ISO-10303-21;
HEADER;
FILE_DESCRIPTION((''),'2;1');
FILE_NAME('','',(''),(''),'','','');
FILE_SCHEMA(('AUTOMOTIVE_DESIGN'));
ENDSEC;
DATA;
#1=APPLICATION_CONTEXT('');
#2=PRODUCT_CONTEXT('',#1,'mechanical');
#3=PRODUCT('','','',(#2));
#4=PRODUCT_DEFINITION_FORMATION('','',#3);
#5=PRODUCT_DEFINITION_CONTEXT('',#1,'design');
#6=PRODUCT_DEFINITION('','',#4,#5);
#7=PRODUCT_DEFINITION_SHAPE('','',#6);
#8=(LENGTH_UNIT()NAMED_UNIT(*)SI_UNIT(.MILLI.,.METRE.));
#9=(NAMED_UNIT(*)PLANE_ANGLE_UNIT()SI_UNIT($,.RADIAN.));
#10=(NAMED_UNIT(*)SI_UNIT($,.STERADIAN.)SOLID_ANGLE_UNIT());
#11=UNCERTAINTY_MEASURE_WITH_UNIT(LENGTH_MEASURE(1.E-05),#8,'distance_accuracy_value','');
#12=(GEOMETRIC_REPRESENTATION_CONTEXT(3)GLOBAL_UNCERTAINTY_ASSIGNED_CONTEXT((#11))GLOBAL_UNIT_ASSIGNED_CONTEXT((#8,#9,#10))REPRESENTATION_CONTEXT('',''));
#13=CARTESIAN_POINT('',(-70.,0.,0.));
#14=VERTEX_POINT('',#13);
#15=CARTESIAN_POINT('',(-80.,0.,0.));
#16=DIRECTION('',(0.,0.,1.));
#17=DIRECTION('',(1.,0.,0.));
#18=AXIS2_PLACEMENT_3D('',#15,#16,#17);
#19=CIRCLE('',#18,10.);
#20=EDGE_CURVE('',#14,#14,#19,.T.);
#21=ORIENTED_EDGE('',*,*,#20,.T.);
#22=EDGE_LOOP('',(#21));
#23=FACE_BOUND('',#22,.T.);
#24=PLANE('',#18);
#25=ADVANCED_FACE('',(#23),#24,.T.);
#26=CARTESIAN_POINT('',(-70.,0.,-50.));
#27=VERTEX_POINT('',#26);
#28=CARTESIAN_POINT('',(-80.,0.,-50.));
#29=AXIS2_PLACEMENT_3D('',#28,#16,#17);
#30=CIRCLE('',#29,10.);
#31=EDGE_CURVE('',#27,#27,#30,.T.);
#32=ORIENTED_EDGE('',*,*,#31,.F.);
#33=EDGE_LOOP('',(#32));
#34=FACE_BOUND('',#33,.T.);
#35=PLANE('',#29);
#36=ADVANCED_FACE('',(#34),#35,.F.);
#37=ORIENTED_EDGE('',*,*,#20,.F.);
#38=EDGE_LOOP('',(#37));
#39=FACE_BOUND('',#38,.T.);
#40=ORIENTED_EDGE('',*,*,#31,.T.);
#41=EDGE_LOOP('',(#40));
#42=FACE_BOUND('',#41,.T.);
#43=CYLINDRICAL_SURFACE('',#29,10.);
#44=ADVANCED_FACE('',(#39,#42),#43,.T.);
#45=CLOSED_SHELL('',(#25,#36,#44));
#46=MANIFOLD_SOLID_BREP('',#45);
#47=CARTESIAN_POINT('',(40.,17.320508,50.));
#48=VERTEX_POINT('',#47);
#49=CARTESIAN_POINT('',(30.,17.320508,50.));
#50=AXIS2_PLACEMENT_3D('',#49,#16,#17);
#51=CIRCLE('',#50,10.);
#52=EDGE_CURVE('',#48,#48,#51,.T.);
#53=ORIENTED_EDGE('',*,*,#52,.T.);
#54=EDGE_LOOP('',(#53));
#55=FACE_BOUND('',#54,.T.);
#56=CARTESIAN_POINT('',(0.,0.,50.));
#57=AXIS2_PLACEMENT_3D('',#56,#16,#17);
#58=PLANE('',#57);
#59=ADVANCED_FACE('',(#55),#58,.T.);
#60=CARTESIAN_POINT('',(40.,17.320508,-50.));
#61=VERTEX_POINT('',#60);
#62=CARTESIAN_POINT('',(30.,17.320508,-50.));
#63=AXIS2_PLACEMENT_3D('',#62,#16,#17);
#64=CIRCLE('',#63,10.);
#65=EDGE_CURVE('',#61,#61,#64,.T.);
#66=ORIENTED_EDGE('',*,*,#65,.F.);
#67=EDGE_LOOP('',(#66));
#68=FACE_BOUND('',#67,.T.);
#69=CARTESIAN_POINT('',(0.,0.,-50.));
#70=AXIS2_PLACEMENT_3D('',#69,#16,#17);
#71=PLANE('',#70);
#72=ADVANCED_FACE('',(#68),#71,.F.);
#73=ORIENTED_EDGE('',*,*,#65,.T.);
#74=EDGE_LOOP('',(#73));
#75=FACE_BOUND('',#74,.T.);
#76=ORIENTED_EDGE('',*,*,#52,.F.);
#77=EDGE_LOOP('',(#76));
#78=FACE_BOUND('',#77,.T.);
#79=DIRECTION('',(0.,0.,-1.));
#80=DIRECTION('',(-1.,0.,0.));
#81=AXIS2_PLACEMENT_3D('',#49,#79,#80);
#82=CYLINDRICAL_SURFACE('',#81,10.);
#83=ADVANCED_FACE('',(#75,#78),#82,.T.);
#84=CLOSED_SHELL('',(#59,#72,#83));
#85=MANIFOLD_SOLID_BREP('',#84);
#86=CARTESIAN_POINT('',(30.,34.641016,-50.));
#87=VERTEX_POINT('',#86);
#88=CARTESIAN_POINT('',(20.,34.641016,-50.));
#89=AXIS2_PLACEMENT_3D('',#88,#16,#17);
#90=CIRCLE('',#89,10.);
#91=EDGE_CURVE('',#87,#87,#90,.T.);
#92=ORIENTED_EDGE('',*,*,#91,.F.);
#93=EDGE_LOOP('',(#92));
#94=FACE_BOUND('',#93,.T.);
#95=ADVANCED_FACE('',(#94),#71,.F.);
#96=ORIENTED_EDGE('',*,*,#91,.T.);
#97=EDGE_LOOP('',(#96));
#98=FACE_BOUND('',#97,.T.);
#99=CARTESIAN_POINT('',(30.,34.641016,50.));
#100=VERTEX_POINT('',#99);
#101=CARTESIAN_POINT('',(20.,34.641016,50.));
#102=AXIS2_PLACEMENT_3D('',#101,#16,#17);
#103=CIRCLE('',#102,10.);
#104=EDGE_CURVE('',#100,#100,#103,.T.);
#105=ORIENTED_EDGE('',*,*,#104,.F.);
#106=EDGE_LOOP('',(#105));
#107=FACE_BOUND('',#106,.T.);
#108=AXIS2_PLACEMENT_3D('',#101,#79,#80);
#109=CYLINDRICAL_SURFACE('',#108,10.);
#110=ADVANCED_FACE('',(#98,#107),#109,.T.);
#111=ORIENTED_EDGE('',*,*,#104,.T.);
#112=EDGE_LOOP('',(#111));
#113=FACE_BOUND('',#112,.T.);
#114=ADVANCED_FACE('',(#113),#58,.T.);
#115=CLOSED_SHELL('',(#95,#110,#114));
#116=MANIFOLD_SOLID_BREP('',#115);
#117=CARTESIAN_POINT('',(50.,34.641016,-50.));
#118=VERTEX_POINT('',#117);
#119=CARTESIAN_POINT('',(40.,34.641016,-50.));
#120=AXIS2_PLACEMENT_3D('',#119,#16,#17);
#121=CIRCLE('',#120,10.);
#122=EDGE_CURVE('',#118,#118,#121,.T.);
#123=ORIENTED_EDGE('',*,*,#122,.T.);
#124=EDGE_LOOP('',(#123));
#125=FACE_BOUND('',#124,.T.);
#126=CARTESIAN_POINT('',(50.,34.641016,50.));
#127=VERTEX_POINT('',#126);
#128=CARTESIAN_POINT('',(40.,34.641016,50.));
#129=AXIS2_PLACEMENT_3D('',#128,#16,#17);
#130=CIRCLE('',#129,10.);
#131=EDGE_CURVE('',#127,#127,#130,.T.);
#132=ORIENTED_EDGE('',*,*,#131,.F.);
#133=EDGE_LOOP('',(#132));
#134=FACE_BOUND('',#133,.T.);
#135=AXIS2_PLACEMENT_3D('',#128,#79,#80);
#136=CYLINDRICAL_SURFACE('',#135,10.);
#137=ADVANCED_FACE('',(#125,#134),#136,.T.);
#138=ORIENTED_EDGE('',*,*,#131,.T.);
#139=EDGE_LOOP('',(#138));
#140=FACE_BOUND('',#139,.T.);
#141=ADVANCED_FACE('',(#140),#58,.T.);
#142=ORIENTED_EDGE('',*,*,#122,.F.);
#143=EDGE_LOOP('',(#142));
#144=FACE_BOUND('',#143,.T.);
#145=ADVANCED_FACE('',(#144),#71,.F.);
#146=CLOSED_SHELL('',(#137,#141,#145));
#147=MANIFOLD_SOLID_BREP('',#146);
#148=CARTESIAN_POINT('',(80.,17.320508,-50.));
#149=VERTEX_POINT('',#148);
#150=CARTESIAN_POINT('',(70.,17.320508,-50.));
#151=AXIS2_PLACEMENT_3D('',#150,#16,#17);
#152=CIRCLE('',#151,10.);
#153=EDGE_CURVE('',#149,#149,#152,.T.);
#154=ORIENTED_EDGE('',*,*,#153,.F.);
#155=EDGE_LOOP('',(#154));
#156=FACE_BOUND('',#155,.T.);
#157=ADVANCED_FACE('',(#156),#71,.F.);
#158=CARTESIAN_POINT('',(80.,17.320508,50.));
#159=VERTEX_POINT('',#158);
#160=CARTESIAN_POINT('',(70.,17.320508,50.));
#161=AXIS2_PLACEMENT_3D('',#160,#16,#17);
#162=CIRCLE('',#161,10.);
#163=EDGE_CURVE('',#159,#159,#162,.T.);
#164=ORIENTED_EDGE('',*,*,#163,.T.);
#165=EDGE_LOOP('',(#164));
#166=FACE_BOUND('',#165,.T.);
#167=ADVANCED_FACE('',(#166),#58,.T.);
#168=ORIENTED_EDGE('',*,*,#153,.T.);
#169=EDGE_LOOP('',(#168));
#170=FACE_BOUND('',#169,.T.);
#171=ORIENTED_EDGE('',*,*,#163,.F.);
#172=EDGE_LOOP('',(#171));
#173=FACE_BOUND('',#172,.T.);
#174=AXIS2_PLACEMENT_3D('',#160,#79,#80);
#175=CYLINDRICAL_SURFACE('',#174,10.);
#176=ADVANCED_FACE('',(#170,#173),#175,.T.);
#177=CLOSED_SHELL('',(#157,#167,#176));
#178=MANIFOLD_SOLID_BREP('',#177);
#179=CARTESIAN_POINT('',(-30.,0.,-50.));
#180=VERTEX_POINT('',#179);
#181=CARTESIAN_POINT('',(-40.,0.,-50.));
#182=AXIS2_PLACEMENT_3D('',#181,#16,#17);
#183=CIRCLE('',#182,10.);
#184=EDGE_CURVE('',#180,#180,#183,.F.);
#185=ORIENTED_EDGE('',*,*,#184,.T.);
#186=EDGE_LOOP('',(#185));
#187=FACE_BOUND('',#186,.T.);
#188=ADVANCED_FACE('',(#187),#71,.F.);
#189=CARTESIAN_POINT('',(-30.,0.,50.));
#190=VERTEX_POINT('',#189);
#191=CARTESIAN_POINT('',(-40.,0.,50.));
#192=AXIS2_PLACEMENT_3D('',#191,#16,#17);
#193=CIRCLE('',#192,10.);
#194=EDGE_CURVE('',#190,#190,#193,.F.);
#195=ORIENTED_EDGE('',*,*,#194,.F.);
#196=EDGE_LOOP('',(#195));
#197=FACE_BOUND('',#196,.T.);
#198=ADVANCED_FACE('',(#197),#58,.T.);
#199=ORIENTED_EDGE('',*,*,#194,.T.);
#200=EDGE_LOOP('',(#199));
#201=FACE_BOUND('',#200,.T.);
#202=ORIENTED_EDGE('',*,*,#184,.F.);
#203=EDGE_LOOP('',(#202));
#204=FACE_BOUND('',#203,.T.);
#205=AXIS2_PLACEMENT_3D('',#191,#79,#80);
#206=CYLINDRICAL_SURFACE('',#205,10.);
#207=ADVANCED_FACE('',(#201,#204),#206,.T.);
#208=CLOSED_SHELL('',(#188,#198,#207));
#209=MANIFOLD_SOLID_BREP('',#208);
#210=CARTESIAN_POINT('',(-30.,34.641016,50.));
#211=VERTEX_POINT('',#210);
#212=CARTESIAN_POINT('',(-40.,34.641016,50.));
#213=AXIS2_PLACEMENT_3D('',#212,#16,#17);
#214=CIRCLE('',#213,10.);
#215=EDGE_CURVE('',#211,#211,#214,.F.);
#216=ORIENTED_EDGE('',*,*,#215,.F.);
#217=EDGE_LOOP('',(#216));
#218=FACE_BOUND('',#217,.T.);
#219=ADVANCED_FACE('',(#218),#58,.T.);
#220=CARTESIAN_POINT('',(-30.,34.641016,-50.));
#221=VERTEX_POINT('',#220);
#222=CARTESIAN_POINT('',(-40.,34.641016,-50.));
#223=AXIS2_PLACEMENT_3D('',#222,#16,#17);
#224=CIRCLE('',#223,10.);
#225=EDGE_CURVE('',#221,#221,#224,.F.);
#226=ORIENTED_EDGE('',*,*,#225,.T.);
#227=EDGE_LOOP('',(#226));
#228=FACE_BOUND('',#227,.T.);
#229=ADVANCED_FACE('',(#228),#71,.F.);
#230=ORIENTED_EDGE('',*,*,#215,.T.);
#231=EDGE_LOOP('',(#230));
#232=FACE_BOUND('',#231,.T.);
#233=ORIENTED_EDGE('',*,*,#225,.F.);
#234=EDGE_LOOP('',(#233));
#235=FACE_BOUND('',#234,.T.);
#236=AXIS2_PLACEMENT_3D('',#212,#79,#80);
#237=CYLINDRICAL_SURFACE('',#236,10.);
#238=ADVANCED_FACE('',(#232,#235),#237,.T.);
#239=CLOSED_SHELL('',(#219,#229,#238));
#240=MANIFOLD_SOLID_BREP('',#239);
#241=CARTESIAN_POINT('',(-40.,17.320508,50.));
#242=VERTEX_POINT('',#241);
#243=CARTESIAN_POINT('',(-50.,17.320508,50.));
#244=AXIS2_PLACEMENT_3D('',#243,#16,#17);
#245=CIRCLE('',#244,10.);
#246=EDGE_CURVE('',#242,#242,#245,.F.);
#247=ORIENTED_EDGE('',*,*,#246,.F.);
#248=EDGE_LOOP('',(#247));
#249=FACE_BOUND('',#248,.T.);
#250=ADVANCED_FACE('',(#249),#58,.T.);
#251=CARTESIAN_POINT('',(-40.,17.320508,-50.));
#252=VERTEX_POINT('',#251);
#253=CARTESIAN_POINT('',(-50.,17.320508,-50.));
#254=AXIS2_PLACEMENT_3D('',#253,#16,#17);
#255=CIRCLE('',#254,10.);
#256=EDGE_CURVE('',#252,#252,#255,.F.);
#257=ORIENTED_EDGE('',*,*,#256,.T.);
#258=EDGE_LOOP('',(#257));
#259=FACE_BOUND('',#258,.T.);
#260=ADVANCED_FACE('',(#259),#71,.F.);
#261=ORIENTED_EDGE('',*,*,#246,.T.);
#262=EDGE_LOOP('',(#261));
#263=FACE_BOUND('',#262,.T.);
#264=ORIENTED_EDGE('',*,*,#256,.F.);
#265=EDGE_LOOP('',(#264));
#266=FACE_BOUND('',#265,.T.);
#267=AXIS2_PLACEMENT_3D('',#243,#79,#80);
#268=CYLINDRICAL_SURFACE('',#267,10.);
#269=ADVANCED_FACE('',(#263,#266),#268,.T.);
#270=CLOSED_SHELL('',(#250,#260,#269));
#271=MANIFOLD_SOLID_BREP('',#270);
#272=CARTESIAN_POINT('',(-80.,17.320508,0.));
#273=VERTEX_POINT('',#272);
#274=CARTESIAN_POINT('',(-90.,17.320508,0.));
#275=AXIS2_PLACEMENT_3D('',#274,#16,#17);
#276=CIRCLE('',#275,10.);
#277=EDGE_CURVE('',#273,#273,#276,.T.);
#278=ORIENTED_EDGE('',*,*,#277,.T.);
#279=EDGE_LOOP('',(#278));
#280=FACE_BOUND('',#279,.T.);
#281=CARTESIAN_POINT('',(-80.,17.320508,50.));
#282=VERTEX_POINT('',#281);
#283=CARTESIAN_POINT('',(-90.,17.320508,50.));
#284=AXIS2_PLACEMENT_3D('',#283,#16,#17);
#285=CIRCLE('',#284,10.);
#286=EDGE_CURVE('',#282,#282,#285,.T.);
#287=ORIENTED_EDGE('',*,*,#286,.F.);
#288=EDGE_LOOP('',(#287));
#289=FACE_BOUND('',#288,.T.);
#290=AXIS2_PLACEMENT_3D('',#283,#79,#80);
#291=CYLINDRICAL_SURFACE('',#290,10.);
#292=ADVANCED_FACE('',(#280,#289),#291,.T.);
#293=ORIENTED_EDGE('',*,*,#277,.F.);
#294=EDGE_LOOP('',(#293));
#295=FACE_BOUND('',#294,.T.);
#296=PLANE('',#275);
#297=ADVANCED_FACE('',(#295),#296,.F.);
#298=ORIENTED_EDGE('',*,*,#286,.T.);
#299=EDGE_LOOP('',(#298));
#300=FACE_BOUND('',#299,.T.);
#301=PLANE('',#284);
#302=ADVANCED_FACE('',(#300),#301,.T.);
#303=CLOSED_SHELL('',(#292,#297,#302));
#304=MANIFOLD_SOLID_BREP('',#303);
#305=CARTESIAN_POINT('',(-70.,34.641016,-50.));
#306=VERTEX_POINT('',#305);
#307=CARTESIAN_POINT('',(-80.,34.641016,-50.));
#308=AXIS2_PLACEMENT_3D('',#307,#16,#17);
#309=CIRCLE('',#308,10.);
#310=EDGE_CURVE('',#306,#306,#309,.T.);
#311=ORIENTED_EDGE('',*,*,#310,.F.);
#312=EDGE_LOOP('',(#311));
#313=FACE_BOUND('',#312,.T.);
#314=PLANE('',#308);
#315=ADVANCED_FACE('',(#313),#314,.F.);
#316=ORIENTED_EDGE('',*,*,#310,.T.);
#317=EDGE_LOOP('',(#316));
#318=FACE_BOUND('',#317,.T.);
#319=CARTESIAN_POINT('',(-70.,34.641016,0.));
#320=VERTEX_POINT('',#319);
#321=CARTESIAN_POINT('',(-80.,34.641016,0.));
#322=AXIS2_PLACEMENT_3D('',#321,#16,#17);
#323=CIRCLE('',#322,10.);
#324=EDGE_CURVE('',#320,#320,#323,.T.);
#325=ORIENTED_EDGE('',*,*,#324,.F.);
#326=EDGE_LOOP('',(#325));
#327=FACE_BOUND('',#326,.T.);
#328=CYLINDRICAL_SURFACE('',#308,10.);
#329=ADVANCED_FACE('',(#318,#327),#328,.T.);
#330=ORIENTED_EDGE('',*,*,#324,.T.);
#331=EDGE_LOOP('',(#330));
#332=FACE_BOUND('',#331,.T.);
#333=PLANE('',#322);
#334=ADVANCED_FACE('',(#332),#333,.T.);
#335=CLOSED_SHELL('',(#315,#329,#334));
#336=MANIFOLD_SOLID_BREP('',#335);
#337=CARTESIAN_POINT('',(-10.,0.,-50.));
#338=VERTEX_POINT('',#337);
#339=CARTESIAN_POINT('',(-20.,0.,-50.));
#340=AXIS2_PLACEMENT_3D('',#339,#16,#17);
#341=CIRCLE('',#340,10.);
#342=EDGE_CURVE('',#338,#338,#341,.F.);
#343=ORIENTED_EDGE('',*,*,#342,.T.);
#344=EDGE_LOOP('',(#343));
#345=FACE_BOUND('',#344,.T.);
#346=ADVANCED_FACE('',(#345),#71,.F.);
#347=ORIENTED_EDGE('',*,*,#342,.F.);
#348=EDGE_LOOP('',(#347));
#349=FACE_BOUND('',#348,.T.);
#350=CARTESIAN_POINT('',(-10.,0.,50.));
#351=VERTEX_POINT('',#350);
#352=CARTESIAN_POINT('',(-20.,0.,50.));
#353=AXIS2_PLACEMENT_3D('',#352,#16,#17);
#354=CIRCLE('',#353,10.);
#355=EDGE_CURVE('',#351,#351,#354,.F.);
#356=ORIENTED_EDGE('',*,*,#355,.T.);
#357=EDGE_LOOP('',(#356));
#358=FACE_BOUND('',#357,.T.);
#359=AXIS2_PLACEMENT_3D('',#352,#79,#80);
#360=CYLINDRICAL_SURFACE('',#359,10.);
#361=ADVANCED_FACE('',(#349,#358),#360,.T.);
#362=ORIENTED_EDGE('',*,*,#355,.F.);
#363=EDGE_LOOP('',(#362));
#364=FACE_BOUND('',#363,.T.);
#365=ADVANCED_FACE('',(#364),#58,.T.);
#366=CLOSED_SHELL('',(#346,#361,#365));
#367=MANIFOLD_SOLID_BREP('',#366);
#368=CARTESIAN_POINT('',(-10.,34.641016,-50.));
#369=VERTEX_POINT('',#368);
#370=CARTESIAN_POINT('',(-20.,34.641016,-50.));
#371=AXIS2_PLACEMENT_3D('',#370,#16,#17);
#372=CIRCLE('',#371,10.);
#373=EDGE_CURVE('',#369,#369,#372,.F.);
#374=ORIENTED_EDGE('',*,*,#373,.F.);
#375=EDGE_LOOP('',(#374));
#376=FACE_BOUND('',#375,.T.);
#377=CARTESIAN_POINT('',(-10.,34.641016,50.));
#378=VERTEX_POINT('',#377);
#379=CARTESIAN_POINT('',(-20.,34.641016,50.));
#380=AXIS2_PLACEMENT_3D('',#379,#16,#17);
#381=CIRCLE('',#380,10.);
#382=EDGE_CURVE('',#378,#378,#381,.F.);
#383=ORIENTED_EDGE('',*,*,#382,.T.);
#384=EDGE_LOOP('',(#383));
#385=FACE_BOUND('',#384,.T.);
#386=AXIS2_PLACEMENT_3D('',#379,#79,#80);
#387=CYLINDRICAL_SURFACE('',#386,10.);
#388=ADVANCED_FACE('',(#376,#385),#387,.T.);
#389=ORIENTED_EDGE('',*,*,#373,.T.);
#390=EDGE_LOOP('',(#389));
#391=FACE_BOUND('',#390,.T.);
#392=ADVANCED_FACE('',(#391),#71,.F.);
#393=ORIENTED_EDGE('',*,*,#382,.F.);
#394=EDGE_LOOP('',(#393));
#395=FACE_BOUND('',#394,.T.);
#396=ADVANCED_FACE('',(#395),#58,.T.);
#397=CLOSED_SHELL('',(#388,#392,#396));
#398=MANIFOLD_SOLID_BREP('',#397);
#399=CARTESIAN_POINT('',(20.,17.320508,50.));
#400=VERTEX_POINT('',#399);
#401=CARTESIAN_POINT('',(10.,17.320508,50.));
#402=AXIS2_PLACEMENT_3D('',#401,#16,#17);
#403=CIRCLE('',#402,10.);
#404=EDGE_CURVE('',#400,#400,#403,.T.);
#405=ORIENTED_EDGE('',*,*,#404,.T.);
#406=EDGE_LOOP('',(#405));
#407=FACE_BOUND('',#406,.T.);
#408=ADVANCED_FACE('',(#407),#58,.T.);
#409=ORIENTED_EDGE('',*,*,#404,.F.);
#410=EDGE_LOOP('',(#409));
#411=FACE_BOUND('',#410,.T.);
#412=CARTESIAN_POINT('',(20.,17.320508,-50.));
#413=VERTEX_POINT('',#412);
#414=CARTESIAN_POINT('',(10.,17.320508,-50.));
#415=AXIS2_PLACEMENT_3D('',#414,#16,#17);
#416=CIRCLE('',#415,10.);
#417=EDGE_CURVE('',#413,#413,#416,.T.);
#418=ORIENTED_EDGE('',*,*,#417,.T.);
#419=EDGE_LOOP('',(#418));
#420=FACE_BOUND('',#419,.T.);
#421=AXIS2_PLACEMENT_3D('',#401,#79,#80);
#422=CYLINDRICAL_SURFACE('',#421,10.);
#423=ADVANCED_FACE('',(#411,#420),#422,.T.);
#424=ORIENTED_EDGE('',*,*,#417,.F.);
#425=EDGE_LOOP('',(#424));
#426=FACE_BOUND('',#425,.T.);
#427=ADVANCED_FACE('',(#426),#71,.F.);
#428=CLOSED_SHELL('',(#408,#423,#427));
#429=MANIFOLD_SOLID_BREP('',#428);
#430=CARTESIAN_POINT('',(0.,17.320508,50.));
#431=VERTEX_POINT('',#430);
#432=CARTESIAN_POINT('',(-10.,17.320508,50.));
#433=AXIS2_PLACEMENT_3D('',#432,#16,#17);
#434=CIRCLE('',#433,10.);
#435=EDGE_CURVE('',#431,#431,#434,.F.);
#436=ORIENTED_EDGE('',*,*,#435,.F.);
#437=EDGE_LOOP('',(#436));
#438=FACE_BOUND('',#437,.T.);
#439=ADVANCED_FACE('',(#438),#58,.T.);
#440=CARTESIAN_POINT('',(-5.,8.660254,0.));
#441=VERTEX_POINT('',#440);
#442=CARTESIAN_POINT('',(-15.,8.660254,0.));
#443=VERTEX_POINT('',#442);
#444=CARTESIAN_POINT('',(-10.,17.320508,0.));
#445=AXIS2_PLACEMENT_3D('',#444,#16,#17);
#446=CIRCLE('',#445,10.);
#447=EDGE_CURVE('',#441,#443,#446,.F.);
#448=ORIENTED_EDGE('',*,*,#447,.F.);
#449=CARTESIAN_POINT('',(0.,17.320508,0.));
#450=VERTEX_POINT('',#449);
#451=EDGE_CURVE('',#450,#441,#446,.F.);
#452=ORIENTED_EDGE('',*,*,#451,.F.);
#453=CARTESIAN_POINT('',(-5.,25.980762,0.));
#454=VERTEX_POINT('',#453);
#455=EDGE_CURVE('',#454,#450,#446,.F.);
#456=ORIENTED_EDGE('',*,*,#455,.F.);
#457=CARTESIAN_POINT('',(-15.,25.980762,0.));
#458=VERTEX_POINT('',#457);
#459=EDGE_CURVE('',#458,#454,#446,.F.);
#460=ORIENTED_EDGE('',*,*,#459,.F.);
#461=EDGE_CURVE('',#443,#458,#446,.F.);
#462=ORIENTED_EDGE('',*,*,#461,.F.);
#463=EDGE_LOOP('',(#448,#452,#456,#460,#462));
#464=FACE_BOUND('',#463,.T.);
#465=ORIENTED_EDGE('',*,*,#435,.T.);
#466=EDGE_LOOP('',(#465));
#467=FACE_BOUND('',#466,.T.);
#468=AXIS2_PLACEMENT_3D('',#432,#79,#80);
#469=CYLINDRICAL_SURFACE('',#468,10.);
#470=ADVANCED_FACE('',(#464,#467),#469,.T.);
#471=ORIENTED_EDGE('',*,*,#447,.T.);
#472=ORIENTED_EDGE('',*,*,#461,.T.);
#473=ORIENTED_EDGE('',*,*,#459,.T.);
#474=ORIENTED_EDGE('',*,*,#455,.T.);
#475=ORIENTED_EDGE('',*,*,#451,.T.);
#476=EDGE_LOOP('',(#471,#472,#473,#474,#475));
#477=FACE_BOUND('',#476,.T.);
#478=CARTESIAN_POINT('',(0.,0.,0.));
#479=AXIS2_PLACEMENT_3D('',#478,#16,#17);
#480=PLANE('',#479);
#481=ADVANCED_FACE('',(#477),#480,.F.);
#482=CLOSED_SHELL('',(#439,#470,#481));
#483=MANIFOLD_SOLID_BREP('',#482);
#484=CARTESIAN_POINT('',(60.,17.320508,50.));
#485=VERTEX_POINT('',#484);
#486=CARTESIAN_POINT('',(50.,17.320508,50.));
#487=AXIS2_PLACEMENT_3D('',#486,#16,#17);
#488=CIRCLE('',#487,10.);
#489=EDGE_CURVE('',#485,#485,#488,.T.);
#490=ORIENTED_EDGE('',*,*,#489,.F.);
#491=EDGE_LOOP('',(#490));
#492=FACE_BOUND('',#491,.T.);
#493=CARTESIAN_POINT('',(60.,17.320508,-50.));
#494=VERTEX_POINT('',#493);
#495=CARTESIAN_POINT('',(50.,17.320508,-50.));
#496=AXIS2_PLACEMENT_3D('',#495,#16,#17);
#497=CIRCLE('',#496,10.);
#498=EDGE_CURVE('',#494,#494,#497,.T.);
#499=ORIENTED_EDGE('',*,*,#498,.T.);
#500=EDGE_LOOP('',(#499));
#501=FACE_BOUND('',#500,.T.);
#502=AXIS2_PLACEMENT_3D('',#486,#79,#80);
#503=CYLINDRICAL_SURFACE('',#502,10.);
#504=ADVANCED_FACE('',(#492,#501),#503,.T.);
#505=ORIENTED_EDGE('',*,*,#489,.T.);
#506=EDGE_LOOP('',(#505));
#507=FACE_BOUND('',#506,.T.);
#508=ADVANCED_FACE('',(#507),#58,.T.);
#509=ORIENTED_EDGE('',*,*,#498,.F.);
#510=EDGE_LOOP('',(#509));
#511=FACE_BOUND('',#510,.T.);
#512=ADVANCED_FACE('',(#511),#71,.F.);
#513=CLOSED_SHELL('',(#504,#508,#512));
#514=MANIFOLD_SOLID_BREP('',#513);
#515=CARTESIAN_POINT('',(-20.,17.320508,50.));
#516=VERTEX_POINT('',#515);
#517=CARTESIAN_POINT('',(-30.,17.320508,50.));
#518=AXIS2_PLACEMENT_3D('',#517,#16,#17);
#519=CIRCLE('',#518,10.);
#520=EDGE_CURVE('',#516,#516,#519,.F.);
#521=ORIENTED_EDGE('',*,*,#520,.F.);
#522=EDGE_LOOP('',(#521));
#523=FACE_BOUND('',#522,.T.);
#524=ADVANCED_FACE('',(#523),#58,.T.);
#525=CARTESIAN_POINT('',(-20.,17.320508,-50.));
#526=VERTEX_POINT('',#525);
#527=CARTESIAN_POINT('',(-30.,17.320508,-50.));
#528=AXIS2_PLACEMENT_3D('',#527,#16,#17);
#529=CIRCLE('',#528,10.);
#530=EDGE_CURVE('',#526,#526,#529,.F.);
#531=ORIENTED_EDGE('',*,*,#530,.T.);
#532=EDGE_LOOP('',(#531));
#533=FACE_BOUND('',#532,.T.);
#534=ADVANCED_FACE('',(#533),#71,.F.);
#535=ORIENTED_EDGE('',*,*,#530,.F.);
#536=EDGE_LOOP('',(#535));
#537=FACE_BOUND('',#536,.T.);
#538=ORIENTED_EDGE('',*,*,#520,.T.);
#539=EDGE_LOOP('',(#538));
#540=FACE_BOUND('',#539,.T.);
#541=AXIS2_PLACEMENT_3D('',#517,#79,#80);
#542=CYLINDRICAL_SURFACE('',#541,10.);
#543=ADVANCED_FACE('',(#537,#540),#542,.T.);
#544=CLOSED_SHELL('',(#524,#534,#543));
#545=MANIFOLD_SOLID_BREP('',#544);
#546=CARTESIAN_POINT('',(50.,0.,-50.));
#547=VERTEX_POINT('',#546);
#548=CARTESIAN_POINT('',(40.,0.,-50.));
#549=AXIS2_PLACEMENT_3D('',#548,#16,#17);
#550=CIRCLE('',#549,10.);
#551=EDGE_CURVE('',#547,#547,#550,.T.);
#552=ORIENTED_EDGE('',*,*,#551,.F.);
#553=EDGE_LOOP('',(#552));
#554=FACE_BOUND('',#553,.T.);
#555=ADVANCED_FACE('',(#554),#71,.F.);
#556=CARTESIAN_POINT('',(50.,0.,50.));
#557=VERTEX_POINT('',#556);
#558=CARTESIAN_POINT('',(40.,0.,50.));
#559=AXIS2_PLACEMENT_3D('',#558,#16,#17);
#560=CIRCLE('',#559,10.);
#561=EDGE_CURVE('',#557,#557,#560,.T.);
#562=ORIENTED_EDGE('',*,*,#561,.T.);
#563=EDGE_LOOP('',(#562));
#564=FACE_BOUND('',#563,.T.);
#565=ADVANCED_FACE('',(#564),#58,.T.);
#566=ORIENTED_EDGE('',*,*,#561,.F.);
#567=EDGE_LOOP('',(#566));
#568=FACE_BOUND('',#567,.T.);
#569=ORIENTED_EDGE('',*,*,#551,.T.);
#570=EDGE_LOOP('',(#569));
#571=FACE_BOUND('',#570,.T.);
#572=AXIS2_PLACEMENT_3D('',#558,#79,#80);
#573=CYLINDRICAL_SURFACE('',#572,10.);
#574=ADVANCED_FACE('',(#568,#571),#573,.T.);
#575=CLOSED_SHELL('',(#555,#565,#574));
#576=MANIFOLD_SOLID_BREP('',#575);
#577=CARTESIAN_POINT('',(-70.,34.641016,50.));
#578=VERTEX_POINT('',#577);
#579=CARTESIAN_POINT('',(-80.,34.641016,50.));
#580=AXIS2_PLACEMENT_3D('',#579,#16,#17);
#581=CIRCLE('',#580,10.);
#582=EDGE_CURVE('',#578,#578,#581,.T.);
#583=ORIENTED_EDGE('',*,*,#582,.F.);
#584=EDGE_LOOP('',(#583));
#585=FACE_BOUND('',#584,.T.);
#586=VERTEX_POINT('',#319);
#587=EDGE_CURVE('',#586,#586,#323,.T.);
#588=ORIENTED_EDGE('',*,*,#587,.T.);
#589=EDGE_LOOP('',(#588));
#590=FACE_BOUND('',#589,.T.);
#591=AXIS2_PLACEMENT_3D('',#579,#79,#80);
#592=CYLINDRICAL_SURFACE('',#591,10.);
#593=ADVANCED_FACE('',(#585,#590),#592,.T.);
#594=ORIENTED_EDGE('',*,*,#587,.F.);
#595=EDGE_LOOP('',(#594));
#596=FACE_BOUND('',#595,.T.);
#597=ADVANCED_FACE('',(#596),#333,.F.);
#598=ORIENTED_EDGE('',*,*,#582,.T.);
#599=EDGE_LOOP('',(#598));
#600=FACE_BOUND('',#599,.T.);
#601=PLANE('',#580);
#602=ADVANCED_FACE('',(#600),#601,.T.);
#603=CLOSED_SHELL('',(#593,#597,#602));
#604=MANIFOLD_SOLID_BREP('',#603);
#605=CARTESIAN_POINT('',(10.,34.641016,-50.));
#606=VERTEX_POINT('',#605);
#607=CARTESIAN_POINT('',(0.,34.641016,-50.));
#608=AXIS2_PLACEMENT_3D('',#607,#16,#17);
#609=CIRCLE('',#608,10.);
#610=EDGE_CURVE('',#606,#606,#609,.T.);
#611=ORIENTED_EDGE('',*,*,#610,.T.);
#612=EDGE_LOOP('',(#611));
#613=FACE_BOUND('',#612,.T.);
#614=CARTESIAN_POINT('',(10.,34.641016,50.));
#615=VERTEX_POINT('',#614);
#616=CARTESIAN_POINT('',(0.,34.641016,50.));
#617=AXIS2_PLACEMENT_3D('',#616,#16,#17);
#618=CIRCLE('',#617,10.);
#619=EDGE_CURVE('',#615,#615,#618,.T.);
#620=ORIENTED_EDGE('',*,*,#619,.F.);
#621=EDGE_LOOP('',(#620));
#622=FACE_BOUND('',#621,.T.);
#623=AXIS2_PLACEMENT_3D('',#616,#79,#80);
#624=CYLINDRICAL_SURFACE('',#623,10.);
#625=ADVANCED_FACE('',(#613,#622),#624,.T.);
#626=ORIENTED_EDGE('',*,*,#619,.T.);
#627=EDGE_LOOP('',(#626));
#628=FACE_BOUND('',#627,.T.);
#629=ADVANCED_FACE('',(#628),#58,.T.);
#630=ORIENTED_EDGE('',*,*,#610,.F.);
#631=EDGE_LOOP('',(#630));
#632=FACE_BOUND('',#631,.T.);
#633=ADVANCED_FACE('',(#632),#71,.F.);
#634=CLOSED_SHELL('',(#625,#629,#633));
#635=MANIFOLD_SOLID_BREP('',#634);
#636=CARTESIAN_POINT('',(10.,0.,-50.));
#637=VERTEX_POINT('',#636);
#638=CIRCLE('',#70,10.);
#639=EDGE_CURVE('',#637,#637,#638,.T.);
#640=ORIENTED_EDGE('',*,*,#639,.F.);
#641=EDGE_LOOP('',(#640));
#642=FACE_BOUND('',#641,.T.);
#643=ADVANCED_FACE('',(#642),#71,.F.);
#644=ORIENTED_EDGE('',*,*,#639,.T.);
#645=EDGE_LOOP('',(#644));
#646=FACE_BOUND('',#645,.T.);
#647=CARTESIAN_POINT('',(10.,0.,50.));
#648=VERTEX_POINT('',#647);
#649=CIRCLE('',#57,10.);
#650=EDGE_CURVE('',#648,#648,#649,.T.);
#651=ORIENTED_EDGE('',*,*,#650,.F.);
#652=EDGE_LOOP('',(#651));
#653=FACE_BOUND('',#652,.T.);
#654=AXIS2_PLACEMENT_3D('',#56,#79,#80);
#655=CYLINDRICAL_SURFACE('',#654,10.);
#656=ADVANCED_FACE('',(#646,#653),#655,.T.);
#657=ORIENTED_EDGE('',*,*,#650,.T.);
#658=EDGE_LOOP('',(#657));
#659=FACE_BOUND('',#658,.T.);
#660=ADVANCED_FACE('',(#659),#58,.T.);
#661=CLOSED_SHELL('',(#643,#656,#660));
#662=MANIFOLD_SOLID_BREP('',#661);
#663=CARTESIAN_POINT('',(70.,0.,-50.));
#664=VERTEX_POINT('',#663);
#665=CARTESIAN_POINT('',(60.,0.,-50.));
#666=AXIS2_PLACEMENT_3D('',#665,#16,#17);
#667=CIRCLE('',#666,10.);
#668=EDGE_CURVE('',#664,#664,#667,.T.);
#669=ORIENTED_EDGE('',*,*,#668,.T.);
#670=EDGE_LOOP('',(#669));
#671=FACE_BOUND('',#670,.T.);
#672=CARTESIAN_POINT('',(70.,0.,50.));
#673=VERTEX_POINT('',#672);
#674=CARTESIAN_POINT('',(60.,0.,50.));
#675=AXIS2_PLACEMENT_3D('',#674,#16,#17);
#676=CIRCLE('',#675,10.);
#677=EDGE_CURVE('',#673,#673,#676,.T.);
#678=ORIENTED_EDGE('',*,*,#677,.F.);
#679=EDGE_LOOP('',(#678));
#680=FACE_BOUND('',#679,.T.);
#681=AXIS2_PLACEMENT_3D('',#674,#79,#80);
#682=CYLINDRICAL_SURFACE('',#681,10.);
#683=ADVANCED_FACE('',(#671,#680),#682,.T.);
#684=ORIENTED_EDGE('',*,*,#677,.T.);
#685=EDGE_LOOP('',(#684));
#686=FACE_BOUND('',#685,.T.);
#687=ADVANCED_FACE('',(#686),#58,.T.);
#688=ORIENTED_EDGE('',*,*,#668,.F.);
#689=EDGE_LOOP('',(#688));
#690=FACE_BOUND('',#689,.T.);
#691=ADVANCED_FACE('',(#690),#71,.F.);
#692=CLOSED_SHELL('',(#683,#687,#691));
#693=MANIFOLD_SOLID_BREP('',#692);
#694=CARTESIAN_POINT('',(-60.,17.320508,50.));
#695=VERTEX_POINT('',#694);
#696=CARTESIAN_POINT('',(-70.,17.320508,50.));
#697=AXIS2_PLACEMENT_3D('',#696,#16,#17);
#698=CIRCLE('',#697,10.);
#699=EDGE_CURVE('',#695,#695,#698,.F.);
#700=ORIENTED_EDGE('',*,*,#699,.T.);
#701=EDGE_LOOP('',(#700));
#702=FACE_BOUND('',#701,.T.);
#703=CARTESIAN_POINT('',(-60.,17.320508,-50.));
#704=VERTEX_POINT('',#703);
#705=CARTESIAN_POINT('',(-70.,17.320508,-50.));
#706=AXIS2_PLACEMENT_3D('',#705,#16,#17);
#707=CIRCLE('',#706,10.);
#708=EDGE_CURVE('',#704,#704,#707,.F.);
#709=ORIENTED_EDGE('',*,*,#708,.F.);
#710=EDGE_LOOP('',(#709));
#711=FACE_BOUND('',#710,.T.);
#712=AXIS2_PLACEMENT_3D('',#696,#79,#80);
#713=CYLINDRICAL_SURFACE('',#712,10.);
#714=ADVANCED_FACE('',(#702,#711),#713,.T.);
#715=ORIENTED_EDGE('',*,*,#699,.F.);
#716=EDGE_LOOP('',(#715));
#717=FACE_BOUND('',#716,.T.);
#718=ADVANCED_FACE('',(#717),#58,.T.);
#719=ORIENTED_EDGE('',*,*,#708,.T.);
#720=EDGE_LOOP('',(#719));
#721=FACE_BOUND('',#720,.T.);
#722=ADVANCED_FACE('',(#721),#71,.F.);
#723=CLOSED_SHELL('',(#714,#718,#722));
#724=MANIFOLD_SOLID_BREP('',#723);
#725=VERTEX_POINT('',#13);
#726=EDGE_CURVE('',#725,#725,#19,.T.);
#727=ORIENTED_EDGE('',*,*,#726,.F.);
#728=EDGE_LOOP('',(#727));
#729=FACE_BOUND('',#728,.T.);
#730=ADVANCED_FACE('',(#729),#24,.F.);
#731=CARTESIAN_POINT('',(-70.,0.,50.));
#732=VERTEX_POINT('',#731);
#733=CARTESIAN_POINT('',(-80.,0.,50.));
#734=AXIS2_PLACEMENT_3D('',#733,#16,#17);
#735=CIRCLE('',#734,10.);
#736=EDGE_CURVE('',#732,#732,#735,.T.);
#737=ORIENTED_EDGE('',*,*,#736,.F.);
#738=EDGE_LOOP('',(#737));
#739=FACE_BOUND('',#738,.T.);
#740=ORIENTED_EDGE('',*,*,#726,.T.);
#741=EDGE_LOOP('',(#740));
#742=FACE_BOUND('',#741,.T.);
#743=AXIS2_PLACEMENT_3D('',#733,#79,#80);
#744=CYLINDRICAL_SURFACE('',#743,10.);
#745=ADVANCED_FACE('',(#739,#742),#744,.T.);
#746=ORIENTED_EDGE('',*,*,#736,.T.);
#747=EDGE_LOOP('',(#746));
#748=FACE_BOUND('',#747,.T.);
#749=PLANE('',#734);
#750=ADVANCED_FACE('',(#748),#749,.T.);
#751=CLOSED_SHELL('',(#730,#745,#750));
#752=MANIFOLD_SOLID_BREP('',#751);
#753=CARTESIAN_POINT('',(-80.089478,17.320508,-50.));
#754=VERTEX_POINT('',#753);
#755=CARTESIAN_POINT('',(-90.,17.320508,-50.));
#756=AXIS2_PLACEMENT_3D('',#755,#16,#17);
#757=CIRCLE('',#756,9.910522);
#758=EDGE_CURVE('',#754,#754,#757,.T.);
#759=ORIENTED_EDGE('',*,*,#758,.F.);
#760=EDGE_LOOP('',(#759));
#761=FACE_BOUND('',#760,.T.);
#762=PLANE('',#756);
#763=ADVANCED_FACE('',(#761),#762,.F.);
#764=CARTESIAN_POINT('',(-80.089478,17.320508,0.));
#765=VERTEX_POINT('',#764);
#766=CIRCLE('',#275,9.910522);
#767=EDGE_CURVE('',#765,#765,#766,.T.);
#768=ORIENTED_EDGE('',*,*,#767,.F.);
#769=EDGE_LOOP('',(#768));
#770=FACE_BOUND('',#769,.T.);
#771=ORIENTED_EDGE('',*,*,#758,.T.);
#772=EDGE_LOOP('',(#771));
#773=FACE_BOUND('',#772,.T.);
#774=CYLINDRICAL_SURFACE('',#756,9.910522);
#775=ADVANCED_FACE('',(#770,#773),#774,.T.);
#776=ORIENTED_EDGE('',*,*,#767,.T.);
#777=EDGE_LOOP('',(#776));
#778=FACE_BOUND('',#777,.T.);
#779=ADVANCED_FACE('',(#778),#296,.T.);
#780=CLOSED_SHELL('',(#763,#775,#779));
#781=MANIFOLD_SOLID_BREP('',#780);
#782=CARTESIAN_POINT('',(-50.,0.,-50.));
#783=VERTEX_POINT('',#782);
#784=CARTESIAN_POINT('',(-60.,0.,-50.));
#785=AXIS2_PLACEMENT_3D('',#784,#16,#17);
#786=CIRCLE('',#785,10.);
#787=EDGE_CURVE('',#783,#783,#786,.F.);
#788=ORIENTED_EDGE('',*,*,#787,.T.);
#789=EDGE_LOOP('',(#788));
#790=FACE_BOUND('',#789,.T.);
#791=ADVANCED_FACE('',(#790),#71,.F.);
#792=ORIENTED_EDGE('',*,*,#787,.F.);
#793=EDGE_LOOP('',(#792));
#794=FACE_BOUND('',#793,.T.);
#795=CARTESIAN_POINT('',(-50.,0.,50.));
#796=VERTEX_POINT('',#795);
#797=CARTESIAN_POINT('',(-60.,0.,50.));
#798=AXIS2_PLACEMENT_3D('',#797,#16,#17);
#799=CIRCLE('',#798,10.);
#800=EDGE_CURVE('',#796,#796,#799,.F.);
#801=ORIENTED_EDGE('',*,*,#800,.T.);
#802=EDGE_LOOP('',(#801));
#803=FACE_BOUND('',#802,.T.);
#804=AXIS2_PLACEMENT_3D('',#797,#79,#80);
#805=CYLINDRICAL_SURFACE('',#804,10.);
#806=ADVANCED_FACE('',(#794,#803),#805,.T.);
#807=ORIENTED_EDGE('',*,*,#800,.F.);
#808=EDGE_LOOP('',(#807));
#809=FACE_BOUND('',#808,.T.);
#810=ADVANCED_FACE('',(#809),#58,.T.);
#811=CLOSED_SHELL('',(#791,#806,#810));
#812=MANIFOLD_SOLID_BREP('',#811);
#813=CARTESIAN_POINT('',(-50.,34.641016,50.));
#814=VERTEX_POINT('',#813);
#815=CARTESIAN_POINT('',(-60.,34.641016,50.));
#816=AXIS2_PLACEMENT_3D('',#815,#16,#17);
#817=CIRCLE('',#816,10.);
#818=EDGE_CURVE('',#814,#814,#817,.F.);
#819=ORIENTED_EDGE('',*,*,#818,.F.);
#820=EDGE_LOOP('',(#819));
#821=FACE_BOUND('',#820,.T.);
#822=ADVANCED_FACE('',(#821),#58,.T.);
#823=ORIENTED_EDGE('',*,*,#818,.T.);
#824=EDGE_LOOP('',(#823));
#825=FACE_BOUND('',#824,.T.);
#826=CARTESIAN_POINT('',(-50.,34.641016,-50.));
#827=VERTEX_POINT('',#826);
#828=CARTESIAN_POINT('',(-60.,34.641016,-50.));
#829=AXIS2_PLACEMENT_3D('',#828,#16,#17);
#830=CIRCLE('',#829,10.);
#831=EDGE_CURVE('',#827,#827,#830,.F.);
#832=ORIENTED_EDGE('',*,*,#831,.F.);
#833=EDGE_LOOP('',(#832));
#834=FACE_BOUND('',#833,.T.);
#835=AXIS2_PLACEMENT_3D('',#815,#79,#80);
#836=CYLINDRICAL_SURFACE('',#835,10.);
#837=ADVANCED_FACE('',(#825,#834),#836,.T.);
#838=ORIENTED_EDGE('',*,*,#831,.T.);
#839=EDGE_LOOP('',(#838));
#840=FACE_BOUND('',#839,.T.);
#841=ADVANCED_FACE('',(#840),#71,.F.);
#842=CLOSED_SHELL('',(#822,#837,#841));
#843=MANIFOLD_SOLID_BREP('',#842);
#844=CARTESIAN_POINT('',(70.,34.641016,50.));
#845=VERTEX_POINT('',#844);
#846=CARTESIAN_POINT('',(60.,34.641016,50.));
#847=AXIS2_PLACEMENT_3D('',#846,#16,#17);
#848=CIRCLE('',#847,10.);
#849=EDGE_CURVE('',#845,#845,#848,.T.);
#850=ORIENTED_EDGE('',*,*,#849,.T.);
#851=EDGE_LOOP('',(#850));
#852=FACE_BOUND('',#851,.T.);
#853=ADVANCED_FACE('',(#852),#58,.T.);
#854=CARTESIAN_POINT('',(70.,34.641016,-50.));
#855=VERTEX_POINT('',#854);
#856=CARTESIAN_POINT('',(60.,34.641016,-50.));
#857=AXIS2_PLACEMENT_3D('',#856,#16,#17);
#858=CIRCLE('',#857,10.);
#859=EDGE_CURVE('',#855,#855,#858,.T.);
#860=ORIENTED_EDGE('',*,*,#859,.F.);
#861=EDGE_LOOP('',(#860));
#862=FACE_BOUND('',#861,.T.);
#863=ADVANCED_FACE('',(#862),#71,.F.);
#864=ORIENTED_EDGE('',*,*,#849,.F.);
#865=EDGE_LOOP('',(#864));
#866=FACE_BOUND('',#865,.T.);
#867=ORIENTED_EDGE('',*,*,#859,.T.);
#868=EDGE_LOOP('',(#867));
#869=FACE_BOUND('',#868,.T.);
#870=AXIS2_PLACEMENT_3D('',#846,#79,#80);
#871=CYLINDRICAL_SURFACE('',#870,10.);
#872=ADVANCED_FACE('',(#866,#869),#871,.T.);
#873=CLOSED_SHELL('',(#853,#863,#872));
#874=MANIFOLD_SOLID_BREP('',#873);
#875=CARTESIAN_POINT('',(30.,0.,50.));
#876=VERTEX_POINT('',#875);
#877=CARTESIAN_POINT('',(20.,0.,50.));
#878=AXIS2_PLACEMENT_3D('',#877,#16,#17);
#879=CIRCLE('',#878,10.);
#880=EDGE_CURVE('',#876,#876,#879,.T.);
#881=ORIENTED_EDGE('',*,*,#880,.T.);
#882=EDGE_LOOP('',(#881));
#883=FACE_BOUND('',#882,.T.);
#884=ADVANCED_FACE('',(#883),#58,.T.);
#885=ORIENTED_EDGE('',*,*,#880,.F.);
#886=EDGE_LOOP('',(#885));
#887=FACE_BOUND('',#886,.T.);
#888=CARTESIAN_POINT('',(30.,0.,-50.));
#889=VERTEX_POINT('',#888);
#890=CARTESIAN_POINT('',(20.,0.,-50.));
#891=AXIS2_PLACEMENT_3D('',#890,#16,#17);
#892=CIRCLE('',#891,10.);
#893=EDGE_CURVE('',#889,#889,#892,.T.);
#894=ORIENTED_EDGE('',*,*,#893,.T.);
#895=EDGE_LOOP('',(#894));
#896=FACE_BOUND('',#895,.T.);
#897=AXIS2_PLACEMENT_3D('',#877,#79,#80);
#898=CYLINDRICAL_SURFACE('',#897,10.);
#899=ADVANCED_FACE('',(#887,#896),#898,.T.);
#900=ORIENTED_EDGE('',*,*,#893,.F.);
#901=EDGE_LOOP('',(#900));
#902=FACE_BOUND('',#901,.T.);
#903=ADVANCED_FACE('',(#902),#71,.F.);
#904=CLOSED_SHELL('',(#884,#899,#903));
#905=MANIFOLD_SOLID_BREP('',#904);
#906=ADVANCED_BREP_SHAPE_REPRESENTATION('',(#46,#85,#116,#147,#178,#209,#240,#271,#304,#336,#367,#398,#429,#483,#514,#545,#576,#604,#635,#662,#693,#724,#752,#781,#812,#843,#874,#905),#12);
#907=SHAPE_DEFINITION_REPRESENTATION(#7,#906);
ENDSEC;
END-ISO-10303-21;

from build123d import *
from build123d.topology import SkipClean

# Parameters (mm, degrees)
SKETCH_1_R         = 10
EXTRUDE_1_DEPTH    = 50
EXTRUDE_1_2_DEPTH  = 50
EXTRUDE_1_3_DEPTH  = 50
EXTRUDE_1_4_DEPTH  = 50
EXTRUDE_1_5_DEPTH  = 50
EXTRUDE_1_6_DEPTH  = 50
EXTRUDE_1_7_DEPTH  = 50
EXTRUDE_1_8_DEPTH  = 50
EXTRUDE_1_9_DEPTH  = 50
EXTRUDE_1_10_DEPTH = 50
EXTRUDE_1_11_DEPTH = 50
EXTRUDE_1_12_DEPTH = 50
EXTRUDE_1_13_DEPTH = 50
EXTRUDE_1_14_DEPTH = 50
EXTRUDE_1_15_DEPTH = 50
EXTRUDE_1_16_DEPTH = 50
EXTRUDE_1_17_DEPTH = 50
EXTRUDE_1_18_DEPTH = 50
EXTRUDE_1_19_DEPTH = 50
EXTRUDE_1_20_DEPTH = 50
EXTRUDE_1_21_DEPTH = 50
EXTRUDE_1_22_DEPTH = 50
EXTRUDE_1_23_DEPTH = 50
EXTRUDE_1_24_DEPTH = 50
EXTRUDE_1_25_DEPTH = 50
EXTRUDE_START      = -50
SKETCH_2_R         = 9.910522244
EXTRUDE_2_DEPTH    = 50


with BuildPart() as part:
    # 草图1 → 凸台-拉伸1 (new body)
    with BuildSketch(Plane.XY):
        with Locations((-60, 34.641016151)):
            Circle(SKETCH_1_R)
    extrude(amount=EXTRUDE_1_DEPTH)



with BuildPart() as body_2:
    # 草图1 → Extrude 1 2 (new body)
    with BuildSketch(Plane.XY):
        with Locations((-70, 17.320508076)):
            Circle(SKETCH_1_R)
    extrude(amount=EXTRUDE_1_2_DEPTH)


with BuildPart() as body_3:
    # 草图1 → Extrude 1 3 (new body)
    with BuildSketch(Plane.XY):
        with Locations((-60, 0)):
            Circle(SKETCH_1_R)
    extrude(amount=EXTRUDE_1_3_DEPTH)


with BuildPart() as body_4:
    # 草图1 → Extrude 1 4 (new body)
    with BuildSketch(Plane.XY):
        with Locations((-50, 17.320508076)):
            Circle(SKETCH_1_R)
    extrude(amount=EXTRUDE_1_4_DEPTH)


with BuildPart() as body_5:
    # 草图1 → Extrude 1 5 (new body)
    with BuildSketch(Plane.XY):
        with Locations((-30, 17.320508076)):
            Circle(SKETCH_1_R)
    extrude(amount=EXTRUDE_1_5_DEPTH)


with BuildPart() as body_6:
    # 草图1 → Extrude 1 6 (new body)
    with BuildSketch(Plane.XY):
        with Locations((-40, 0)):
            Circle(SKETCH_1_R)
    extrude(amount=EXTRUDE_1_6_DEPTH)


with BuildPart() as body_7:
    # 草图1 → Extrude 1 7 (new body)
    with BuildSketch(Plane.XY):
        with Locations((-10, 17.320508076)):
            Circle(SKETCH_1_R)
    extrude(amount=EXTRUDE_1_7_DEPTH)


with BuildPart() as body_8:
    # 草图1 → Extrude 1 8 (new body)
    with BuildSketch(Plane.XY):
        with Locations((-20, 0)):
            Circle(SKETCH_1_R)
    extrude(amount=EXTRUDE_1_8_DEPTH)


with BuildPart() as body_9:
    # 草图1 → Extrude 1 9 (new body)
    with BuildSketch(Plane.XY):
        with Locations((10, 17.320508076)):
            Circle(SKETCH_1_R)
    extrude(amount=EXTRUDE_1_9_DEPTH)


with BuildPart() as body_10:
    # 草图1 → Extrude 1 10 (new body)
    with BuildSketch(Plane.XY):
        with Locations((30, 17.320508076)):
            Circle(SKETCH_1_R)
    extrude(amount=EXTRUDE_1_10_DEPTH)


with BuildPart() as body_11:
    # 草图1 → Extrude 1 11 (new body)
    with BuildSketch(Plane.XY):
        Circle(SKETCH_1_R)
    extrude(amount=EXTRUDE_1_11_DEPTH)


with BuildPart() as body_12:
    # 草图1 → Extrude 1 12 (new body)
    with BuildSketch(Plane.XY):
        with Locations((20, 0)):
            Circle(SKETCH_1_R)
    extrude(amount=EXTRUDE_1_12_DEPTH)


with BuildPart() as body_13:
    # 草图1 → Extrude 1 13 (new body)
    with BuildSketch(Plane.XY):
        with Locations((40, 0)):
            Circle(SKETCH_1_R)
    extrude(amount=EXTRUDE_1_13_DEPTH)


with BuildPart() as body_14:
    # 草图1 → Extrude 1 14 (new body)
    with BuildSketch(Plane.XY):
        with Locations((50, 17.320508076)):
            Circle(SKETCH_1_R)
    extrude(amount=EXTRUDE_1_14_DEPTH)


with BuildPart() as body_15:
    # 草图1 → Extrude 1 15 (new body)
    with BuildSketch(Plane.XY):
        with Locations((40, 34.641016151)):
            Circle(SKETCH_1_R)
    extrude(amount=EXTRUDE_1_15_DEPTH)


with BuildPart() as body_16:
    # 草图1 → Extrude 1 16 (new body)
    with BuildSketch(Plane.XY):
        with Locations((0, 34.641016151)):
            Circle(SKETCH_1_R)
    extrude(amount=EXTRUDE_1_16_DEPTH)


with BuildPart() as body_17:
    # 草图1 → Extrude 1 17 (new body)
    with BuildSketch(Plane.XY):
        with Locations((20, 34.641016151)):
            Circle(SKETCH_1_R)
    extrude(amount=EXTRUDE_1_17_DEPTH)


with BuildPart() as body_18:
    # 草图1 → Extrude 1 18 (new body)
    with BuildSketch(Plane.XY):
        with Locations((-20, 34.641016151)):
            Circle(SKETCH_1_R)
    extrude(amount=EXTRUDE_1_18_DEPTH)


with BuildPart() as body_19:
    # 草图1 → Extrude 1 19 (new body)
    with BuildSketch(Plane.XY):
        with Locations((-40, 34.641016151)):
            Circle(SKETCH_1_R)
    extrude(amount=EXTRUDE_1_19_DEPTH)


with BuildPart() as body_20:
    # 草图1 → Extrude 1 20 (new body)
    with BuildSketch(Plane.XY):
        with Locations((60, 34.641016151)):
            Circle(SKETCH_1_R)
    extrude(amount=EXTRUDE_1_20_DEPTH)


with BuildPart() as body_21:
    # 草图1 → Extrude 1 21 (new body)
    with BuildSketch(Plane.XY):
        with Locations((70, 17.320508076)):
            Circle(SKETCH_1_R)
    extrude(amount=EXTRUDE_1_21_DEPTH)


with BuildPart() as body_22:
    # 草图1 → Extrude 1 22 (new body)
    with BuildSketch(Plane.XY):
        with Locations((60, 0)):
            Circle(SKETCH_1_R)
    extrude(amount=EXTRUDE_1_22_DEPTH)


with BuildPart() as body_23:
    # 草图1 → Extrude 1 23 (new body)
    with BuildSketch(Plane.XY):
        with Locations((-90, 17.320508076)):
            Circle(SKETCH_1_R)
    extrude(amount=EXTRUDE_1_23_DEPTH)


with BuildPart() as body_24:
    # 草图1 → Extrude 1 24 (new body)
    with BuildSketch(Plane.XY):
        with Locations((-80, 0)):
            Circle(SKETCH_1_R)
    extrude(amount=EXTRUDE_1_24_DEPTH)


with BuildPart() as body_25:
    # 草图1 → Extrude 1 25 (new body)
    with BuildSketch(Plane.XY):
        with Locations((-80, 34.641016151)):
            Circle(SKETCH_1_R)
    extrude(amount=EXTRUDE_1_25_DEPTH)


with BuildPart() as part_1:
    with SkipClean():  # the faces are left unmerged after this step: merging them gives an invalid solid
        add(part.part)

        add(body_2.part)  # 凸台-拉伸2 merges body 2

        add(body_3.part)  # 凸台-拉伸2 merges body 3

        add(body_4.part)  # 凸台-拉伸2 merges body 4

        add(body_5.part)  # 凸台-拉伸2 merges body 5

        add(body_6.part)  # 凸台-拉伸2 merges body 6

        add(body_8.part)  # 凸台-拉伸2 merges body 8

        add(body_9.part)  # 凸台-拉伸2 merges body 9

        add(body_10.part)  # 凸台-拉伸2 merges body 10

        add(body_11.part)  # 凸台-拉伸2 merges body 11

        add(body_12.part)  # 凸台-拉伸2 merges body 12

        add(body_13.part)  # 凸台-拉伸2 merges body 13

        add(body_14.part)  # 凸台-拉伸2 merges body 14

        add(body_15.part)  # 凸台-拉伸2 merges body 15

        add(body_16.part)  # 凸台-拉伸2 merges body 16

        add(body_17.part)  # 凸台-拉伸2 merges body 17

        add(body_18.part)  # 凸台-拉伸2 merges body 18

        add(body_19.part)  # 凸台-拉伸2 merges body 19

        add(body_20.part)  # 凸台-拉伸2 merges body 20

        add(body_21.part)  # 凸台-拉伸2 merges body 21

        add(body_22.part)  # 凸台-拉伸2 merges body 22
        # 草图2 → 凸台-拉伸2 (add)
        with BuildSketch(Plane.XY.offset(EXTRUDE_START)):
            with BuildLine():
                ThreePointArc((-10, 0), (0, -10), (10, 0))
                ThreePointArc((10, 0), (8.660254084, 4.99999992), (5.000000161, 8.660253945))
                ThreePointArc((5.000000161, 8.660253945), (-4.99999992, 8.660254084), (-10, 0))
            make_face()
            with BuildLine():
                ThreePointArc((-10, 0), (-14.999999925, 8.660253995), (-24.99999985, 8.660254124))
                ThreePointArc((-24.99999985, 8.660254124), (-28.660253995, 5.000000075), (-30, 0))
                ThreePointArc((-30, 0), (-20, -10), (-10, 0))
            make_face()
            with BuildLine():
                ThreePointArc((10, 0), (20, -10), (30, 0))
                ThreePointArc((30, 0), (28.660254042, 4.999999993), (25.000000014, 8.66025403))
                ThreePointArc((25.000000014, 8.66025403), (20.000000064, 10), (15.000000097, 8.660254094))
                ThreePointArc((15.000000097, 8.660254094), (11.33974599, 5.000000048), (10, 0))
            make_face()
            with BuildLine():
                ThreePointArc((15.000000097, 8.660254094), (18.660254066, 12.320508124), (20, 17.320508076))
                ThreePointArc((20, 17.320508076), (18.660253991, 22.320508156), (14.999999839, 25.980762206))
                ThreePointArc((14.999999839, 25.980762206), (9.99999992, 27.320508076), (5.000000022, 25.980762126))
                ThreePointArc((5.000000022, 25.980762126), (0, 17.320507995), (5.000000161, 8.660253945))
                ThreePointArc((5.000000161, 8.660253945), (10.000000149, 7.320508076), (15.000000097, 8.660254094))
            make_face()
            with BuildLine():
                ThreePointArc((-30, 0), (-31.339745981, 5.000000032), (-35.000000064, 8.660254075))
                ThreePointArc((-35.000000064, 8.660254075), (-40, 10), (-44.999999936, 8.660254075))
                ThreePointArc((-44.999999936, 8.660254075), (-48.660254019, 5.000000032), (-50, 0))
                ThreePointArc((-50, 0), (-40, -10), (-30, 0))
            make_face()
            with BuildLine():
                ThreePointArc((-35.000000064, 8.660254075), (-29.99999995, 7.320508076), (-24.99999985, 8.660254124))
                ThreePointArc((-24.99999985, 8.660254124), (-20, 17.320508225), (-25.000000109, 25.980762177))
                ThreePointArc((-25.000000109, 25.980762177), (-30.000000003, 27.320508076), (-34.999999895, 25.980762174))
                ThreePointArc((-34.999999895, 25.980762174), (-38.660254008, 22.320508128), (-40, 17.320508076))
                ThreePointArc((-40, 17.320508076), (-38.660254056, 12.320508108), (-35.000000064, 8.660254075))
            make_face()
            with BuildLine():
                ThreePointArc((30, 0), (40, -10), (50, 0))
                ThreePointArc((50, 0), (48.660254083, 4.999999921), (45.000000158, 8.660253947))
                ThreePointArc((45.000000158, 8.660253947), (40.000000054, 10), (34.999999936, 8.660254001))
                ThreePointArc((34.999999936, 8.660254001), (31.339745944, 4.999999968), (30, 0))
            make_face()
            with BuildLine():
                ThreePointArc((5.000000022, 25.980762126), (8.660254044, 29.641016162), (10, 34.641016151))
                ThreePointArc((10, 34.641016151), (0, 44.641016151), (-10, 34.641016151))
                ThreePointArc((-10, 34.641016151), (-4.999999989, 25.980762107), (5.000000022, 25.980762126))
            make_face()
            with BuildLine():
                ThreePointArc((-50, 0), (-51.339745941, 4.999999963), (-54.999999925, 8.660253995))
                ThreePointArc((-54.999999925, 8.660253995), (-60.000000155, 10), (-65.000000343, 8.66025384))
                ThreePointArc((-65.000000343, 8.66025384), (-68.660254137, 4.999999828), (-70, 0))
                ThreePointArc((-70, 0), (-60, -10), (-50, 0))
            make_face()
            with BuildLine():
                ThreePointArc((20, 17.320508076), (21.339745966, 12.320508069), (25.000000014, 8.66025403))
                ThreePointArc((25.000000014, 8.66025403), (29.999999971, 7.320508076), (34.999999936, 8.660254001))
                ThreePointArc((34.999999936, 8.660254001), (38.660254019, 12.320508044), (40, 17.320508076))
                ThreePointArc((40, 17.320508076), (38.660253951, 22.320508226), (34.9999997, 25.980762287))
                ThreePointArc((34.9999997, 25.980762287), (29.999999792, 27.320508076), (24.999999939, 25.980762078))
                ThreePointArc((24.999999939, 25.980762078), (21.339745945, 22.320508045), (20, 17.320508076))
            make_face()
            with BuildLine():
                ThreePointArc((50, 0), (65.000000117, -8.66025397), (64.999999766, 8.660254173))
                ThreePointArc((64.999999766, 8.660254173), (59.999999923, 10), (55.0000001, 8.660254095))
                ThreePointArc((55.0000001, 8.660254095), (51.339745991, 5.00000005), (50, 0))
            make_face()
            with BuildLine():
                ThreePointArc((10, 34.641016151), (11.339745916, 29.641016232), (14.999999839, 25.980762206))
                ThreePointArc((14.999999839, 25.980762206), (19.999999872, 24.641016151), (24.999999939, 25.980762078))
                ThreePointArc((24.999999939, 25.980762078), (28.66025402, 29.641016121), (30, 34.641016151))
                ThreePointArc((30, 34.641016151), (20, 44.641016151), (10, 34.641016151))
            make_face()
            with BuildLine():
                ThreePointArc((-25.000000109, 25.980762177), (-15.000000055, 25.980762082), (-10, 34.641016151))
                ThreePointArc((-10, 34.641016151), (-20, 44.641016151), (-30, 34.641016151))
                ThreePointArc((-30, 34.641016151), (-28.660254069, 29.641016206), (-25.000000109, 25.980762177))
            make_face()
            with BuildLine():
                ThreePointArc((-70, 0), (-71.339745946, 4.999999973), (-74.999999945, 8.660254006))
                ThreePointArc((-74.999999945, 8.660254006), (-88.660254054, -4.999999973), (-70, 0))
            make_face()
            with BuildLine():
                ThreePointArc((-40, 17.320508076), (-41.339745941, 22.320508038), (-44.999999925, 25.98076207))
                ThreePointArc((-44.999999925, 25.98076207), (-50.00000005, 27.320508076), (-55.000000161, 25.980762021))
                ThreePointArc((-55.000000161, 25.980762021), (-58.660254084, 22.320507995), (-60, 17.320508076))
                ThreePointArc((-60, 17.320508076), (-58.660254016, 12.320508038), (-54.999999925, 8.660253995))
                ThreePointArc((-54.999999925, 8.660253995), (-49.99999992, 7.320508076), (-44.999999936, 8.660254075))
                ThreePointArc((-44.999999936, 8.660254075), (-41.339745944, 12.320508108), (-40, 17.320508076))
            make_face()
            with BuildLine():
                ThreePointArc((40, 17.320508076), (41.339746008, 12.320507997), (45.000000158, 8.660253947))
                ThreePointArc((45.000000158, 8.660253947), (50.000000149, 7.320508076), (55.0000001, 8.660254095))
                ThreePointArc((55.0000001, 8.660254095), (58.660254067, 12.320508126), (60, 17.320508076))
                ThreePointArc((60, 17.320508076), (58.660254066, 22.320508027), (55.000000098, 25.980762057))
                ThreePointArc((55.000000098, 25.980762057), (50.000000088, 27.320508076), (45.000000055, 25.980762145))
                ThreePointArc((45.000000055, 25.980762145), (41.339745978, 22.320508103), (40, 17.320508076))
            make_face()
            with BuildLine():
                ThreePointArc((-34.999999895, 25.980762174), (-31.339745932, 29.641016204), (-30, 34.641016151))
                ThreePointArc((-30, 34.641016151), (-40, 44.641016151), (-50, 34.641016151))
                ThreePointArc((-50, 34.641016151), (-48.660254016, 29.641016114), (-44.999999925, 25.98076207))
                ThreePointArc((-44.999999925, 25.98076207), (-39.999999896, 24.641016151), (-34.999999895, 25.980762174))
            make_face()
            with BuildLine():
                ThreePointArc((45.000000055, 25.980762145), (48.660254054, 29.641016179), (50, 34.641016151))
                ThreePointArc((50, 34.641016151), (40, 44.641016151), (30, 34.641016151))
                ThreePointArc((30, 34.641016151), (31.339745876, 29.641016301), (34.9999997, 25.980762287))
                ThreePointArc((34.9999997, 25.980762287), (39.999999859, 24.641016151), (45.000000055, 25.980762145))
            make_face()
            with BuildLine():
                ThreePointArc((-74.999999945, 8.660254006), (-70.000000167, 7.320508076), (-65.000000343, 8.66025384))
                ThreePointArc((-65.000000343, 8.66025384), (-61.339746061, 12.320507904), (-60, 17.320508076))
                ThreePointArc((-60, 17.320508076), (-61.339745944, 22.320508044), (-64.999999936, 25.980762077))
                ThreePointArc((-64.999999936, 25.980762077), (-69.999999686, 27.320508076), (-74.999999521, 25.98076239))
                ThreePointArc((-74.999999521, 25.98076239), (-80, 17.320508321), (-74.999999945, 8.660254006))
            make_face()
            with BuildLine():
                ThreePointArc((60, 17.320508076), (61.339745895, 12.320508193), (64.999999766, 8.660254173))
                ThreePointArc((64.999999766, 8.660254173), (80, 17.320507897), (65.000000075, 25.980762157))
                ThreePointArc((65.000000075, 25.980762157), (61.339745984, 22.320508113), (60, 17.320508076))
            make_face()
            with BuildLine():
                ThreePointArc((-55.000000161, 25.980762021), (-51.339746009, 29.641016071), (-50, 34.641016151))
                ThreePointArc((-50, 34.641016151), (-60, 44.641016151), (-70, 34.641016151))
                ThreePointArc((-70, 34.641016151), (-68.660254019, 29.641016119), (-64.999999936, 25.980762077))
                ThreePointArc((-64.999999936, 25.980762077), (-60.000000056, 24.641016151), (-55.000000161, 25.980762021))
            make_face()
            with BuildLine():
                ThreePointArc((65.000000075, 25.980762157), (64.999999963, 43.301270211), (50, 34.641016151))
                ThreePointArc((50, 34.641016151), (51.33974599, 29.641016102), (55.000000098, 25.980762057))
                ThreePointArc((55.000000098, 25.980762057), (60.0000001, 24.641016151), (65.000000075, 25.980762157))
            make_face()
            with BuildLine():
                ThreePointArc((-70, 34.641016151), (-88.660254176, 39.641015912), (-74.999999521, 25.98076239))
                ThreePointArc((-74.999999521, 25.98076239), (-71.339745824, 29.641016391), (-70, 34.641016151))
            make_face()
            with Locations((-90, 17.320508076)):
                Circle(SKETCH_2_R)
        extrude(amount=EXTRUDE_2_DEPTH)


solid = Compound([body_7.part, body_23.part, body_24.part, body_25.part, part_1.part])
